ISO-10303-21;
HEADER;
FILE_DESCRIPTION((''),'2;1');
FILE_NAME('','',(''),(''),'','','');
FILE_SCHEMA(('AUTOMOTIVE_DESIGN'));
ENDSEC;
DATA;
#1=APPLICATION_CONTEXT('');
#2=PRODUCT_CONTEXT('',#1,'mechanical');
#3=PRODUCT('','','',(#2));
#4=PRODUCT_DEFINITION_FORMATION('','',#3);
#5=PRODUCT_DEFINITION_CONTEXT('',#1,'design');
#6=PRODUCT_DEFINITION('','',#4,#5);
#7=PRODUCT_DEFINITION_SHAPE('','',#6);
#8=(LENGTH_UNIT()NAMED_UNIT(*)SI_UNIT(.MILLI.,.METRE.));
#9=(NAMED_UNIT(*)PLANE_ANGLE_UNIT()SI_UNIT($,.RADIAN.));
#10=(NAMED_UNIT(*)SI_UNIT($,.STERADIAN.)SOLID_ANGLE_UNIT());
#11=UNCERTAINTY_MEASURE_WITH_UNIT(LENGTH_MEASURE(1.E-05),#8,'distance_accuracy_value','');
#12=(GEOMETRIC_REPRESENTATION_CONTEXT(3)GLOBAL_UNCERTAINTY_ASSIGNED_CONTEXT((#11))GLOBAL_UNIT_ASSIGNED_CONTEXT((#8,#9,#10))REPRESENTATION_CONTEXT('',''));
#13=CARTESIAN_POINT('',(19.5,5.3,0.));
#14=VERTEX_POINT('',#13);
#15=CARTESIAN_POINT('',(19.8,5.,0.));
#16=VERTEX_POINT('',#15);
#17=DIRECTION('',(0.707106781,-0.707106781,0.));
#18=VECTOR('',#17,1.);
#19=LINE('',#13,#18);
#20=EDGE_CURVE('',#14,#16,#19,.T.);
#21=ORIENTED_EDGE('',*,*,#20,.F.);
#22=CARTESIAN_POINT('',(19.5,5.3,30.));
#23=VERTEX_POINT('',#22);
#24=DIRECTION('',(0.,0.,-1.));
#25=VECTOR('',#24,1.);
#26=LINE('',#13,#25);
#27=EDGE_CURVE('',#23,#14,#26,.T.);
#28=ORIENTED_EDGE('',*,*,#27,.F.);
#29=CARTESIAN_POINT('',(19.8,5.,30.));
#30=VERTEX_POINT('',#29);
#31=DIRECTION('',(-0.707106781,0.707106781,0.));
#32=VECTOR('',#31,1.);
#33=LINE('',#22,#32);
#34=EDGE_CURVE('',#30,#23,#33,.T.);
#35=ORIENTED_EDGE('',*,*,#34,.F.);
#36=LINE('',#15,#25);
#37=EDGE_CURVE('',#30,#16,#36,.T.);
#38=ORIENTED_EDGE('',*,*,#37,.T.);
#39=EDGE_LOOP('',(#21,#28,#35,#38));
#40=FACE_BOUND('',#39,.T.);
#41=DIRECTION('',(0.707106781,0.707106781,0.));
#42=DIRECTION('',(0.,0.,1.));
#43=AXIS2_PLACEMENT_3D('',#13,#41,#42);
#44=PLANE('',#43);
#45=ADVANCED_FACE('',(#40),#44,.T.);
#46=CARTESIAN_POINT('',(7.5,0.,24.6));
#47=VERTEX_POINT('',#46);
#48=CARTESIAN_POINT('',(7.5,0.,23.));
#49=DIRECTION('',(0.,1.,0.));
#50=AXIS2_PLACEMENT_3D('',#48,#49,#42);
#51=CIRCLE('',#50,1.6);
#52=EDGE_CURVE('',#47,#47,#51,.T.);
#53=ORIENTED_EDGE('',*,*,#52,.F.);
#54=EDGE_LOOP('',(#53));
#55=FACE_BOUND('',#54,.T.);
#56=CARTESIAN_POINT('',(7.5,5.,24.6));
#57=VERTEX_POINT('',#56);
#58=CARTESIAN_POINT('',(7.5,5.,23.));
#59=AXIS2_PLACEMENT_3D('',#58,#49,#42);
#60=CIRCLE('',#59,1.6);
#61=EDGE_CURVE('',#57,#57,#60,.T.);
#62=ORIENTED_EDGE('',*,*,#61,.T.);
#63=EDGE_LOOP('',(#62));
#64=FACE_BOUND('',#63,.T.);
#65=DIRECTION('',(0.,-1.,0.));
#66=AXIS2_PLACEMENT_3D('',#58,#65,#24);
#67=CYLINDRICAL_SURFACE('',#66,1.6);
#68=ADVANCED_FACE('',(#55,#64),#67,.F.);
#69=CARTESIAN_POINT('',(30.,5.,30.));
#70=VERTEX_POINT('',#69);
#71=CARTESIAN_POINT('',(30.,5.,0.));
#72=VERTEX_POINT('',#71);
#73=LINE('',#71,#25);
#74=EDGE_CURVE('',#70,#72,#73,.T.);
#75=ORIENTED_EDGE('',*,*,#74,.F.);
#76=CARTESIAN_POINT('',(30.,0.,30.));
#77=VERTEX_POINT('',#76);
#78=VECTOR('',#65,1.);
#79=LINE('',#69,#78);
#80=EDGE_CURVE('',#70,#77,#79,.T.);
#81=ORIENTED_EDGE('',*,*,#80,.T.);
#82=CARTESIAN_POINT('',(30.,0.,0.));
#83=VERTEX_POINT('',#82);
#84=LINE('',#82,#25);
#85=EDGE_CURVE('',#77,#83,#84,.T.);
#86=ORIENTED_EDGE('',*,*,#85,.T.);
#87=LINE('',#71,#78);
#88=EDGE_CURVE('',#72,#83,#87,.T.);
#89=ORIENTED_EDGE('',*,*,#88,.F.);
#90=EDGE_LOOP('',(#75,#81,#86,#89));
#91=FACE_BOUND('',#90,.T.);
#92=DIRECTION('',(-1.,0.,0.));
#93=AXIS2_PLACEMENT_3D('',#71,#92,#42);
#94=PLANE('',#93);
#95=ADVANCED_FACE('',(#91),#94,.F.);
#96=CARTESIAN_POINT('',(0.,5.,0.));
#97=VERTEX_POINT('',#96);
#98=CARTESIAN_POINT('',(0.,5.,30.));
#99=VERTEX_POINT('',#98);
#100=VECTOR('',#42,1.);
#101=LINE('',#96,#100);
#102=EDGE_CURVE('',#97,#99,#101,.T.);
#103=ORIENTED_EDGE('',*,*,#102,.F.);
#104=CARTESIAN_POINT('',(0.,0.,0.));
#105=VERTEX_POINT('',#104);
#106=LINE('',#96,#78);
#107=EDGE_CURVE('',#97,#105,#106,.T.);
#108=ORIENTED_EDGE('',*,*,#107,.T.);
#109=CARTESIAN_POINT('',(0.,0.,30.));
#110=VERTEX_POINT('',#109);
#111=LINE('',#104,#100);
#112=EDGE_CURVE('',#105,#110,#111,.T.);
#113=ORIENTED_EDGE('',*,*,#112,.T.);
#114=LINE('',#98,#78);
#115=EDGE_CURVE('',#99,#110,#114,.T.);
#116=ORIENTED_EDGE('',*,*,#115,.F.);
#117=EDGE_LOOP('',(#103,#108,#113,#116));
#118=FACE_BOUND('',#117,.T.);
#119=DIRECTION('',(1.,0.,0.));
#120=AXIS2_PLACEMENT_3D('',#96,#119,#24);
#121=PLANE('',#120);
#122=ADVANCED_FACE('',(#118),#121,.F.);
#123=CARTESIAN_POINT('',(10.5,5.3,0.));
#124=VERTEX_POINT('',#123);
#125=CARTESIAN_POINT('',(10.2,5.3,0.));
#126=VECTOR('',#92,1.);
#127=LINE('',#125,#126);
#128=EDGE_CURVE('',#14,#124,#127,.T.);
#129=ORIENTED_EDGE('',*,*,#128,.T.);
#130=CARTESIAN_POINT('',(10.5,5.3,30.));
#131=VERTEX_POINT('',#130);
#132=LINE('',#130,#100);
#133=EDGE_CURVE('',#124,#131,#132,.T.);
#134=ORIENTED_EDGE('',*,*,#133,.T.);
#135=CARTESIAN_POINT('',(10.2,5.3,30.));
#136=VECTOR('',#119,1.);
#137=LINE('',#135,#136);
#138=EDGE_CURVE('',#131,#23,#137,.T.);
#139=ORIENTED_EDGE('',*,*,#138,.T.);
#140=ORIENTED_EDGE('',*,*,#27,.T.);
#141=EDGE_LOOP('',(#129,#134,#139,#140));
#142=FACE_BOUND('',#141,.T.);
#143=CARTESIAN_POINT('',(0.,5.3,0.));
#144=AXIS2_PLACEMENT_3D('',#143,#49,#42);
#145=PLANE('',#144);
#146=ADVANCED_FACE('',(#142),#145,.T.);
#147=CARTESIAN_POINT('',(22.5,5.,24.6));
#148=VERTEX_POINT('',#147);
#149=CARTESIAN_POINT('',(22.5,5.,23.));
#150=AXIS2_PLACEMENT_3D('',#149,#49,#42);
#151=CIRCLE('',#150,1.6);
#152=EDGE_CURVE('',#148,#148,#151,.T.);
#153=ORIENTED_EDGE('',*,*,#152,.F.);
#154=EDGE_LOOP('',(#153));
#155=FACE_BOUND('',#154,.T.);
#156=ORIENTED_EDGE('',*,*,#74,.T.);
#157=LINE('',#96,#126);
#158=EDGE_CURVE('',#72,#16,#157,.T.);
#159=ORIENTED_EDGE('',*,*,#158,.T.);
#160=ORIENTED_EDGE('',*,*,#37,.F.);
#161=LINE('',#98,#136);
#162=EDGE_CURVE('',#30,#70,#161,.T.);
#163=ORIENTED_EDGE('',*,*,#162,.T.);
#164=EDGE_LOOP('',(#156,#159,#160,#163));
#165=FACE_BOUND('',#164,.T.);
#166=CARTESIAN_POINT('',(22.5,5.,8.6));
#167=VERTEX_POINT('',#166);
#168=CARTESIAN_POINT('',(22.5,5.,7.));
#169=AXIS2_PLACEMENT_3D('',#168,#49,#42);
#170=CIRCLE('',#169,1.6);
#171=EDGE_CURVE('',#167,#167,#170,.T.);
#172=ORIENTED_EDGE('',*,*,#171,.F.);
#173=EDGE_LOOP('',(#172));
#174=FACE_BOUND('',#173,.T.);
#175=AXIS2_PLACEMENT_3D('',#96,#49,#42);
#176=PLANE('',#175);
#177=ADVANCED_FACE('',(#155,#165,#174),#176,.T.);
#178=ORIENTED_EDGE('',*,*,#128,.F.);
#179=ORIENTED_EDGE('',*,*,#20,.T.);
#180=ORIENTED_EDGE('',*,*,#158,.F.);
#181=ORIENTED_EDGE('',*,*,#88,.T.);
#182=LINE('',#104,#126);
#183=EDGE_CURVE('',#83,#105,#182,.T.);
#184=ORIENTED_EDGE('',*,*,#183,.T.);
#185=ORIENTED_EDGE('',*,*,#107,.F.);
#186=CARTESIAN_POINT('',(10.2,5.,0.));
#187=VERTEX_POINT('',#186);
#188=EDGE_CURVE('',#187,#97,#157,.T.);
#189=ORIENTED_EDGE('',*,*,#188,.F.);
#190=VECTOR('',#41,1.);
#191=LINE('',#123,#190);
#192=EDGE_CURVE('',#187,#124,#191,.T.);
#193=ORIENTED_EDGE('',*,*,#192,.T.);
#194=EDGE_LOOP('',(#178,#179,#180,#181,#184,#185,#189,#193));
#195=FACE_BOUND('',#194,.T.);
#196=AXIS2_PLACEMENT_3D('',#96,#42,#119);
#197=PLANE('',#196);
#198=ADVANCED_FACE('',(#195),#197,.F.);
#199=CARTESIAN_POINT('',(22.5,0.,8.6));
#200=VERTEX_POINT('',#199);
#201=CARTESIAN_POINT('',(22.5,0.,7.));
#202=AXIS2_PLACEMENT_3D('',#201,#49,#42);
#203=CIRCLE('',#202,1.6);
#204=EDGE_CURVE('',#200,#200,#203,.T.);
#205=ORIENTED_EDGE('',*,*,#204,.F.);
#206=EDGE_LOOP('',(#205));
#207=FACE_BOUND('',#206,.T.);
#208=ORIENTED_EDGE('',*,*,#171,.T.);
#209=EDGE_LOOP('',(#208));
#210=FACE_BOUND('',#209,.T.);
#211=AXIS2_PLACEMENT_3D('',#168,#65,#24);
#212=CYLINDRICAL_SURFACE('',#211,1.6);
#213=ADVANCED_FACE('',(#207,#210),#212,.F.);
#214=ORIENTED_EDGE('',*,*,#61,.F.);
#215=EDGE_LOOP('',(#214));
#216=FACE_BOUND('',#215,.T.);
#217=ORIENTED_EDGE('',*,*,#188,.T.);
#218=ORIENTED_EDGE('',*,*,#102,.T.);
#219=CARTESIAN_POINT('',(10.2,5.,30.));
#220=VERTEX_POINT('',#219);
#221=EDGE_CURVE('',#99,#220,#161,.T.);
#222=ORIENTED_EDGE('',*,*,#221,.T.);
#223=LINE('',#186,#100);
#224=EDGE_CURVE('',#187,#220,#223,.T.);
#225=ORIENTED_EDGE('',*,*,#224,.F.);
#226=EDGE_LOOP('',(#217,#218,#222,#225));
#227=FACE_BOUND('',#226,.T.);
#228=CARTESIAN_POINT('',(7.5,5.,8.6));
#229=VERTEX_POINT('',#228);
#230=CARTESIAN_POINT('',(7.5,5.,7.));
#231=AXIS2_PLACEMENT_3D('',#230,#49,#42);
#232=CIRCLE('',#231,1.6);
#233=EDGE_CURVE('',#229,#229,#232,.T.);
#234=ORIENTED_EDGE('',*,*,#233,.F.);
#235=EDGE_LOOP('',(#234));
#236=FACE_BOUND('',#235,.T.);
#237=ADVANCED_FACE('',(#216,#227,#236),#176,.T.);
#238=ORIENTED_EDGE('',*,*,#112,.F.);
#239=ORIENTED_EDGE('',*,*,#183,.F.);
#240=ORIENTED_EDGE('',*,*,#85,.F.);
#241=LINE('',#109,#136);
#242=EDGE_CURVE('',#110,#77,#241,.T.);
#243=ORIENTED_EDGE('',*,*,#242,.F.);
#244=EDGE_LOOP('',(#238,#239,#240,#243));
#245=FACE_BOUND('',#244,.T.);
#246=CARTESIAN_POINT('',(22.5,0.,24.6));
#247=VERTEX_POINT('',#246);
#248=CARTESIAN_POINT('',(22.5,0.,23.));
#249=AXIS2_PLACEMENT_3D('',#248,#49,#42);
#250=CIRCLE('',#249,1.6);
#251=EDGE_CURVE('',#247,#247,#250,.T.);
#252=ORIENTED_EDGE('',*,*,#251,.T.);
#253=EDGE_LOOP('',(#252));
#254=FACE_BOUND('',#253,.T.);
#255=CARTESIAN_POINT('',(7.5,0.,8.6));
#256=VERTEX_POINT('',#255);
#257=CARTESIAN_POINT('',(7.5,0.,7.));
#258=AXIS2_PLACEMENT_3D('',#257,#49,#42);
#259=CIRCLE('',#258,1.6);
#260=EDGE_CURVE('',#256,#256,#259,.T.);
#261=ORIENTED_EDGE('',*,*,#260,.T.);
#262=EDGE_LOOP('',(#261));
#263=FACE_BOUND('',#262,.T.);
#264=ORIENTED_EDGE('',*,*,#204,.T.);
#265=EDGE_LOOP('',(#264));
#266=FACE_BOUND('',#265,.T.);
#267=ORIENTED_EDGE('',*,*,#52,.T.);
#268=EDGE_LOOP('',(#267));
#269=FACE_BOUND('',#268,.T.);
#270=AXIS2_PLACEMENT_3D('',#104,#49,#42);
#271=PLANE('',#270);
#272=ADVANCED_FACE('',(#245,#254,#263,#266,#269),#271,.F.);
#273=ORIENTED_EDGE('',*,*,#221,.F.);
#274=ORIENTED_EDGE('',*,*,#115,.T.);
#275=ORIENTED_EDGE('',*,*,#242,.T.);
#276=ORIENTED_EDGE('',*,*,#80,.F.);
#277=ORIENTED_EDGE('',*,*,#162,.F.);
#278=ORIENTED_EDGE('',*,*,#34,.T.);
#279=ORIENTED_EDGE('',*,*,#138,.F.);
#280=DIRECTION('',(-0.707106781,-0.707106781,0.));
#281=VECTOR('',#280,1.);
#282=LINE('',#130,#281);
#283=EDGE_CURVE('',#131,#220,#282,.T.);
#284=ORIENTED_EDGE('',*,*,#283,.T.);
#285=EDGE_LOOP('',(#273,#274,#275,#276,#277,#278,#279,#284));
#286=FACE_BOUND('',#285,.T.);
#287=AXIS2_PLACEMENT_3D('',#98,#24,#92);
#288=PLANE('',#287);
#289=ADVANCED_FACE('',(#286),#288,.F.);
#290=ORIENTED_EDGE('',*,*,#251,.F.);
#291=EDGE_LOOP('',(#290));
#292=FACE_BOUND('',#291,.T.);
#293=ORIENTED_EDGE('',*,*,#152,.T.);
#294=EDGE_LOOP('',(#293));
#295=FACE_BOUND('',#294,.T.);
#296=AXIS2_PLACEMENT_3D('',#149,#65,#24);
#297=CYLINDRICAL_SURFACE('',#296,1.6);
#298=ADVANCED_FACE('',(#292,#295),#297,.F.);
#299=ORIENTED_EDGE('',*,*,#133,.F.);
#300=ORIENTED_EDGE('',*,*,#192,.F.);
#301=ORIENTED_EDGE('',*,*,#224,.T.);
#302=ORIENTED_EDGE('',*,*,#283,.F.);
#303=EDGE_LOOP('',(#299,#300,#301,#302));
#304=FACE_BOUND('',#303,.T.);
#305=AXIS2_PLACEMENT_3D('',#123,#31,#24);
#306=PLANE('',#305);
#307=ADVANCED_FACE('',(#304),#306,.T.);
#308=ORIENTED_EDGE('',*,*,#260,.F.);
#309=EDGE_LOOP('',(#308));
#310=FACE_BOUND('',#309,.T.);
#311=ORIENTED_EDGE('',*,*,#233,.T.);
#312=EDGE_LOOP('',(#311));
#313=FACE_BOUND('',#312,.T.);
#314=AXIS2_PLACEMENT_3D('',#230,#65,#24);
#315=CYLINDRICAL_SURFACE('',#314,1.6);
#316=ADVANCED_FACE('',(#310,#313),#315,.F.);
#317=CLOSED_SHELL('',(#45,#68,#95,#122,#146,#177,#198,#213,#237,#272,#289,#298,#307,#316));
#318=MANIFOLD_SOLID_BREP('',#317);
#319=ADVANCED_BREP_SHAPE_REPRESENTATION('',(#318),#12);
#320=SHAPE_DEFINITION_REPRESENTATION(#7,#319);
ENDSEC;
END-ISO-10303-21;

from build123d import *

# Parameters (mm, degrees)
SKETCH_1_W      = 30
SKETCH_1_H      = 30
SKETCH_1_R      = 1.6
EXTRUDE_1_DEPTH = 5
SKETCH_2_W      = 9.6
SKETCH_2_H      = 30
EXTRUDE_2_DEPTH = 0.3
CHAMFER_2_SIZE  = 0.3


with BuildPart() as part:
    # 草图1 → 凸台-拉伸1 (new body)
    with BuildSketch(Plane(origin=(0, 0, 0), x_dir=(1, 0, 0), z_dir=(0, 1, 0))):
        with Locations((15, -15)):
            Rectangle(SKETCH_1_W, SKETCH_1_H)
        with Locations(Location((7.5, -7, 0), (0, 0, 270))):
            Circle(SKETCH_1_R, mode=Mode.SUBTRACT)
        with Locations(Location((22.5, -7, 0), (0, 0, 270))):
            Circle(SKETCH_1_R, mode=Mode.SUBTRACT)
        with Locations(Location((22.5, -23, 0), (0, 0, 270))):
            Circle(SKETCH_1_R, mode=Mode.SUBTRACT)
        with Locations(Location((7.5, -23, 0), (0, 0, 270))):
            Circle(SKETCH_1_R, mode=Mode.SUBTRACT)
    extrude(amount=EXTRUDE_1_DEPTH)

    # 草图2 → 凸台-拉伸2 (add)
    with BuildSketch(Plane(origin=(0, 5, 0), x_dir=(1, 0, 0), z_dir=(0, 1, 0))):
        with Locations((15, -15)):
            Rectangle(SKETCH_2_W, SKETCH_2_H)
    extrude(amount=EXTRUDE_2_DEPTH)

    # 倒角2
    chamfer_2_edges = [part.edges().sort_by_distance(p)[0] for p in [
        (19.8, 5.3, 15),
        (10.2, 5.3, 15),
    ]]
    chamfer(chamfer_2_edges, length=CHAMFER_2_SIZE - 0.0001)  # a hair under: the kernel refuses the full size


solid = part.part
